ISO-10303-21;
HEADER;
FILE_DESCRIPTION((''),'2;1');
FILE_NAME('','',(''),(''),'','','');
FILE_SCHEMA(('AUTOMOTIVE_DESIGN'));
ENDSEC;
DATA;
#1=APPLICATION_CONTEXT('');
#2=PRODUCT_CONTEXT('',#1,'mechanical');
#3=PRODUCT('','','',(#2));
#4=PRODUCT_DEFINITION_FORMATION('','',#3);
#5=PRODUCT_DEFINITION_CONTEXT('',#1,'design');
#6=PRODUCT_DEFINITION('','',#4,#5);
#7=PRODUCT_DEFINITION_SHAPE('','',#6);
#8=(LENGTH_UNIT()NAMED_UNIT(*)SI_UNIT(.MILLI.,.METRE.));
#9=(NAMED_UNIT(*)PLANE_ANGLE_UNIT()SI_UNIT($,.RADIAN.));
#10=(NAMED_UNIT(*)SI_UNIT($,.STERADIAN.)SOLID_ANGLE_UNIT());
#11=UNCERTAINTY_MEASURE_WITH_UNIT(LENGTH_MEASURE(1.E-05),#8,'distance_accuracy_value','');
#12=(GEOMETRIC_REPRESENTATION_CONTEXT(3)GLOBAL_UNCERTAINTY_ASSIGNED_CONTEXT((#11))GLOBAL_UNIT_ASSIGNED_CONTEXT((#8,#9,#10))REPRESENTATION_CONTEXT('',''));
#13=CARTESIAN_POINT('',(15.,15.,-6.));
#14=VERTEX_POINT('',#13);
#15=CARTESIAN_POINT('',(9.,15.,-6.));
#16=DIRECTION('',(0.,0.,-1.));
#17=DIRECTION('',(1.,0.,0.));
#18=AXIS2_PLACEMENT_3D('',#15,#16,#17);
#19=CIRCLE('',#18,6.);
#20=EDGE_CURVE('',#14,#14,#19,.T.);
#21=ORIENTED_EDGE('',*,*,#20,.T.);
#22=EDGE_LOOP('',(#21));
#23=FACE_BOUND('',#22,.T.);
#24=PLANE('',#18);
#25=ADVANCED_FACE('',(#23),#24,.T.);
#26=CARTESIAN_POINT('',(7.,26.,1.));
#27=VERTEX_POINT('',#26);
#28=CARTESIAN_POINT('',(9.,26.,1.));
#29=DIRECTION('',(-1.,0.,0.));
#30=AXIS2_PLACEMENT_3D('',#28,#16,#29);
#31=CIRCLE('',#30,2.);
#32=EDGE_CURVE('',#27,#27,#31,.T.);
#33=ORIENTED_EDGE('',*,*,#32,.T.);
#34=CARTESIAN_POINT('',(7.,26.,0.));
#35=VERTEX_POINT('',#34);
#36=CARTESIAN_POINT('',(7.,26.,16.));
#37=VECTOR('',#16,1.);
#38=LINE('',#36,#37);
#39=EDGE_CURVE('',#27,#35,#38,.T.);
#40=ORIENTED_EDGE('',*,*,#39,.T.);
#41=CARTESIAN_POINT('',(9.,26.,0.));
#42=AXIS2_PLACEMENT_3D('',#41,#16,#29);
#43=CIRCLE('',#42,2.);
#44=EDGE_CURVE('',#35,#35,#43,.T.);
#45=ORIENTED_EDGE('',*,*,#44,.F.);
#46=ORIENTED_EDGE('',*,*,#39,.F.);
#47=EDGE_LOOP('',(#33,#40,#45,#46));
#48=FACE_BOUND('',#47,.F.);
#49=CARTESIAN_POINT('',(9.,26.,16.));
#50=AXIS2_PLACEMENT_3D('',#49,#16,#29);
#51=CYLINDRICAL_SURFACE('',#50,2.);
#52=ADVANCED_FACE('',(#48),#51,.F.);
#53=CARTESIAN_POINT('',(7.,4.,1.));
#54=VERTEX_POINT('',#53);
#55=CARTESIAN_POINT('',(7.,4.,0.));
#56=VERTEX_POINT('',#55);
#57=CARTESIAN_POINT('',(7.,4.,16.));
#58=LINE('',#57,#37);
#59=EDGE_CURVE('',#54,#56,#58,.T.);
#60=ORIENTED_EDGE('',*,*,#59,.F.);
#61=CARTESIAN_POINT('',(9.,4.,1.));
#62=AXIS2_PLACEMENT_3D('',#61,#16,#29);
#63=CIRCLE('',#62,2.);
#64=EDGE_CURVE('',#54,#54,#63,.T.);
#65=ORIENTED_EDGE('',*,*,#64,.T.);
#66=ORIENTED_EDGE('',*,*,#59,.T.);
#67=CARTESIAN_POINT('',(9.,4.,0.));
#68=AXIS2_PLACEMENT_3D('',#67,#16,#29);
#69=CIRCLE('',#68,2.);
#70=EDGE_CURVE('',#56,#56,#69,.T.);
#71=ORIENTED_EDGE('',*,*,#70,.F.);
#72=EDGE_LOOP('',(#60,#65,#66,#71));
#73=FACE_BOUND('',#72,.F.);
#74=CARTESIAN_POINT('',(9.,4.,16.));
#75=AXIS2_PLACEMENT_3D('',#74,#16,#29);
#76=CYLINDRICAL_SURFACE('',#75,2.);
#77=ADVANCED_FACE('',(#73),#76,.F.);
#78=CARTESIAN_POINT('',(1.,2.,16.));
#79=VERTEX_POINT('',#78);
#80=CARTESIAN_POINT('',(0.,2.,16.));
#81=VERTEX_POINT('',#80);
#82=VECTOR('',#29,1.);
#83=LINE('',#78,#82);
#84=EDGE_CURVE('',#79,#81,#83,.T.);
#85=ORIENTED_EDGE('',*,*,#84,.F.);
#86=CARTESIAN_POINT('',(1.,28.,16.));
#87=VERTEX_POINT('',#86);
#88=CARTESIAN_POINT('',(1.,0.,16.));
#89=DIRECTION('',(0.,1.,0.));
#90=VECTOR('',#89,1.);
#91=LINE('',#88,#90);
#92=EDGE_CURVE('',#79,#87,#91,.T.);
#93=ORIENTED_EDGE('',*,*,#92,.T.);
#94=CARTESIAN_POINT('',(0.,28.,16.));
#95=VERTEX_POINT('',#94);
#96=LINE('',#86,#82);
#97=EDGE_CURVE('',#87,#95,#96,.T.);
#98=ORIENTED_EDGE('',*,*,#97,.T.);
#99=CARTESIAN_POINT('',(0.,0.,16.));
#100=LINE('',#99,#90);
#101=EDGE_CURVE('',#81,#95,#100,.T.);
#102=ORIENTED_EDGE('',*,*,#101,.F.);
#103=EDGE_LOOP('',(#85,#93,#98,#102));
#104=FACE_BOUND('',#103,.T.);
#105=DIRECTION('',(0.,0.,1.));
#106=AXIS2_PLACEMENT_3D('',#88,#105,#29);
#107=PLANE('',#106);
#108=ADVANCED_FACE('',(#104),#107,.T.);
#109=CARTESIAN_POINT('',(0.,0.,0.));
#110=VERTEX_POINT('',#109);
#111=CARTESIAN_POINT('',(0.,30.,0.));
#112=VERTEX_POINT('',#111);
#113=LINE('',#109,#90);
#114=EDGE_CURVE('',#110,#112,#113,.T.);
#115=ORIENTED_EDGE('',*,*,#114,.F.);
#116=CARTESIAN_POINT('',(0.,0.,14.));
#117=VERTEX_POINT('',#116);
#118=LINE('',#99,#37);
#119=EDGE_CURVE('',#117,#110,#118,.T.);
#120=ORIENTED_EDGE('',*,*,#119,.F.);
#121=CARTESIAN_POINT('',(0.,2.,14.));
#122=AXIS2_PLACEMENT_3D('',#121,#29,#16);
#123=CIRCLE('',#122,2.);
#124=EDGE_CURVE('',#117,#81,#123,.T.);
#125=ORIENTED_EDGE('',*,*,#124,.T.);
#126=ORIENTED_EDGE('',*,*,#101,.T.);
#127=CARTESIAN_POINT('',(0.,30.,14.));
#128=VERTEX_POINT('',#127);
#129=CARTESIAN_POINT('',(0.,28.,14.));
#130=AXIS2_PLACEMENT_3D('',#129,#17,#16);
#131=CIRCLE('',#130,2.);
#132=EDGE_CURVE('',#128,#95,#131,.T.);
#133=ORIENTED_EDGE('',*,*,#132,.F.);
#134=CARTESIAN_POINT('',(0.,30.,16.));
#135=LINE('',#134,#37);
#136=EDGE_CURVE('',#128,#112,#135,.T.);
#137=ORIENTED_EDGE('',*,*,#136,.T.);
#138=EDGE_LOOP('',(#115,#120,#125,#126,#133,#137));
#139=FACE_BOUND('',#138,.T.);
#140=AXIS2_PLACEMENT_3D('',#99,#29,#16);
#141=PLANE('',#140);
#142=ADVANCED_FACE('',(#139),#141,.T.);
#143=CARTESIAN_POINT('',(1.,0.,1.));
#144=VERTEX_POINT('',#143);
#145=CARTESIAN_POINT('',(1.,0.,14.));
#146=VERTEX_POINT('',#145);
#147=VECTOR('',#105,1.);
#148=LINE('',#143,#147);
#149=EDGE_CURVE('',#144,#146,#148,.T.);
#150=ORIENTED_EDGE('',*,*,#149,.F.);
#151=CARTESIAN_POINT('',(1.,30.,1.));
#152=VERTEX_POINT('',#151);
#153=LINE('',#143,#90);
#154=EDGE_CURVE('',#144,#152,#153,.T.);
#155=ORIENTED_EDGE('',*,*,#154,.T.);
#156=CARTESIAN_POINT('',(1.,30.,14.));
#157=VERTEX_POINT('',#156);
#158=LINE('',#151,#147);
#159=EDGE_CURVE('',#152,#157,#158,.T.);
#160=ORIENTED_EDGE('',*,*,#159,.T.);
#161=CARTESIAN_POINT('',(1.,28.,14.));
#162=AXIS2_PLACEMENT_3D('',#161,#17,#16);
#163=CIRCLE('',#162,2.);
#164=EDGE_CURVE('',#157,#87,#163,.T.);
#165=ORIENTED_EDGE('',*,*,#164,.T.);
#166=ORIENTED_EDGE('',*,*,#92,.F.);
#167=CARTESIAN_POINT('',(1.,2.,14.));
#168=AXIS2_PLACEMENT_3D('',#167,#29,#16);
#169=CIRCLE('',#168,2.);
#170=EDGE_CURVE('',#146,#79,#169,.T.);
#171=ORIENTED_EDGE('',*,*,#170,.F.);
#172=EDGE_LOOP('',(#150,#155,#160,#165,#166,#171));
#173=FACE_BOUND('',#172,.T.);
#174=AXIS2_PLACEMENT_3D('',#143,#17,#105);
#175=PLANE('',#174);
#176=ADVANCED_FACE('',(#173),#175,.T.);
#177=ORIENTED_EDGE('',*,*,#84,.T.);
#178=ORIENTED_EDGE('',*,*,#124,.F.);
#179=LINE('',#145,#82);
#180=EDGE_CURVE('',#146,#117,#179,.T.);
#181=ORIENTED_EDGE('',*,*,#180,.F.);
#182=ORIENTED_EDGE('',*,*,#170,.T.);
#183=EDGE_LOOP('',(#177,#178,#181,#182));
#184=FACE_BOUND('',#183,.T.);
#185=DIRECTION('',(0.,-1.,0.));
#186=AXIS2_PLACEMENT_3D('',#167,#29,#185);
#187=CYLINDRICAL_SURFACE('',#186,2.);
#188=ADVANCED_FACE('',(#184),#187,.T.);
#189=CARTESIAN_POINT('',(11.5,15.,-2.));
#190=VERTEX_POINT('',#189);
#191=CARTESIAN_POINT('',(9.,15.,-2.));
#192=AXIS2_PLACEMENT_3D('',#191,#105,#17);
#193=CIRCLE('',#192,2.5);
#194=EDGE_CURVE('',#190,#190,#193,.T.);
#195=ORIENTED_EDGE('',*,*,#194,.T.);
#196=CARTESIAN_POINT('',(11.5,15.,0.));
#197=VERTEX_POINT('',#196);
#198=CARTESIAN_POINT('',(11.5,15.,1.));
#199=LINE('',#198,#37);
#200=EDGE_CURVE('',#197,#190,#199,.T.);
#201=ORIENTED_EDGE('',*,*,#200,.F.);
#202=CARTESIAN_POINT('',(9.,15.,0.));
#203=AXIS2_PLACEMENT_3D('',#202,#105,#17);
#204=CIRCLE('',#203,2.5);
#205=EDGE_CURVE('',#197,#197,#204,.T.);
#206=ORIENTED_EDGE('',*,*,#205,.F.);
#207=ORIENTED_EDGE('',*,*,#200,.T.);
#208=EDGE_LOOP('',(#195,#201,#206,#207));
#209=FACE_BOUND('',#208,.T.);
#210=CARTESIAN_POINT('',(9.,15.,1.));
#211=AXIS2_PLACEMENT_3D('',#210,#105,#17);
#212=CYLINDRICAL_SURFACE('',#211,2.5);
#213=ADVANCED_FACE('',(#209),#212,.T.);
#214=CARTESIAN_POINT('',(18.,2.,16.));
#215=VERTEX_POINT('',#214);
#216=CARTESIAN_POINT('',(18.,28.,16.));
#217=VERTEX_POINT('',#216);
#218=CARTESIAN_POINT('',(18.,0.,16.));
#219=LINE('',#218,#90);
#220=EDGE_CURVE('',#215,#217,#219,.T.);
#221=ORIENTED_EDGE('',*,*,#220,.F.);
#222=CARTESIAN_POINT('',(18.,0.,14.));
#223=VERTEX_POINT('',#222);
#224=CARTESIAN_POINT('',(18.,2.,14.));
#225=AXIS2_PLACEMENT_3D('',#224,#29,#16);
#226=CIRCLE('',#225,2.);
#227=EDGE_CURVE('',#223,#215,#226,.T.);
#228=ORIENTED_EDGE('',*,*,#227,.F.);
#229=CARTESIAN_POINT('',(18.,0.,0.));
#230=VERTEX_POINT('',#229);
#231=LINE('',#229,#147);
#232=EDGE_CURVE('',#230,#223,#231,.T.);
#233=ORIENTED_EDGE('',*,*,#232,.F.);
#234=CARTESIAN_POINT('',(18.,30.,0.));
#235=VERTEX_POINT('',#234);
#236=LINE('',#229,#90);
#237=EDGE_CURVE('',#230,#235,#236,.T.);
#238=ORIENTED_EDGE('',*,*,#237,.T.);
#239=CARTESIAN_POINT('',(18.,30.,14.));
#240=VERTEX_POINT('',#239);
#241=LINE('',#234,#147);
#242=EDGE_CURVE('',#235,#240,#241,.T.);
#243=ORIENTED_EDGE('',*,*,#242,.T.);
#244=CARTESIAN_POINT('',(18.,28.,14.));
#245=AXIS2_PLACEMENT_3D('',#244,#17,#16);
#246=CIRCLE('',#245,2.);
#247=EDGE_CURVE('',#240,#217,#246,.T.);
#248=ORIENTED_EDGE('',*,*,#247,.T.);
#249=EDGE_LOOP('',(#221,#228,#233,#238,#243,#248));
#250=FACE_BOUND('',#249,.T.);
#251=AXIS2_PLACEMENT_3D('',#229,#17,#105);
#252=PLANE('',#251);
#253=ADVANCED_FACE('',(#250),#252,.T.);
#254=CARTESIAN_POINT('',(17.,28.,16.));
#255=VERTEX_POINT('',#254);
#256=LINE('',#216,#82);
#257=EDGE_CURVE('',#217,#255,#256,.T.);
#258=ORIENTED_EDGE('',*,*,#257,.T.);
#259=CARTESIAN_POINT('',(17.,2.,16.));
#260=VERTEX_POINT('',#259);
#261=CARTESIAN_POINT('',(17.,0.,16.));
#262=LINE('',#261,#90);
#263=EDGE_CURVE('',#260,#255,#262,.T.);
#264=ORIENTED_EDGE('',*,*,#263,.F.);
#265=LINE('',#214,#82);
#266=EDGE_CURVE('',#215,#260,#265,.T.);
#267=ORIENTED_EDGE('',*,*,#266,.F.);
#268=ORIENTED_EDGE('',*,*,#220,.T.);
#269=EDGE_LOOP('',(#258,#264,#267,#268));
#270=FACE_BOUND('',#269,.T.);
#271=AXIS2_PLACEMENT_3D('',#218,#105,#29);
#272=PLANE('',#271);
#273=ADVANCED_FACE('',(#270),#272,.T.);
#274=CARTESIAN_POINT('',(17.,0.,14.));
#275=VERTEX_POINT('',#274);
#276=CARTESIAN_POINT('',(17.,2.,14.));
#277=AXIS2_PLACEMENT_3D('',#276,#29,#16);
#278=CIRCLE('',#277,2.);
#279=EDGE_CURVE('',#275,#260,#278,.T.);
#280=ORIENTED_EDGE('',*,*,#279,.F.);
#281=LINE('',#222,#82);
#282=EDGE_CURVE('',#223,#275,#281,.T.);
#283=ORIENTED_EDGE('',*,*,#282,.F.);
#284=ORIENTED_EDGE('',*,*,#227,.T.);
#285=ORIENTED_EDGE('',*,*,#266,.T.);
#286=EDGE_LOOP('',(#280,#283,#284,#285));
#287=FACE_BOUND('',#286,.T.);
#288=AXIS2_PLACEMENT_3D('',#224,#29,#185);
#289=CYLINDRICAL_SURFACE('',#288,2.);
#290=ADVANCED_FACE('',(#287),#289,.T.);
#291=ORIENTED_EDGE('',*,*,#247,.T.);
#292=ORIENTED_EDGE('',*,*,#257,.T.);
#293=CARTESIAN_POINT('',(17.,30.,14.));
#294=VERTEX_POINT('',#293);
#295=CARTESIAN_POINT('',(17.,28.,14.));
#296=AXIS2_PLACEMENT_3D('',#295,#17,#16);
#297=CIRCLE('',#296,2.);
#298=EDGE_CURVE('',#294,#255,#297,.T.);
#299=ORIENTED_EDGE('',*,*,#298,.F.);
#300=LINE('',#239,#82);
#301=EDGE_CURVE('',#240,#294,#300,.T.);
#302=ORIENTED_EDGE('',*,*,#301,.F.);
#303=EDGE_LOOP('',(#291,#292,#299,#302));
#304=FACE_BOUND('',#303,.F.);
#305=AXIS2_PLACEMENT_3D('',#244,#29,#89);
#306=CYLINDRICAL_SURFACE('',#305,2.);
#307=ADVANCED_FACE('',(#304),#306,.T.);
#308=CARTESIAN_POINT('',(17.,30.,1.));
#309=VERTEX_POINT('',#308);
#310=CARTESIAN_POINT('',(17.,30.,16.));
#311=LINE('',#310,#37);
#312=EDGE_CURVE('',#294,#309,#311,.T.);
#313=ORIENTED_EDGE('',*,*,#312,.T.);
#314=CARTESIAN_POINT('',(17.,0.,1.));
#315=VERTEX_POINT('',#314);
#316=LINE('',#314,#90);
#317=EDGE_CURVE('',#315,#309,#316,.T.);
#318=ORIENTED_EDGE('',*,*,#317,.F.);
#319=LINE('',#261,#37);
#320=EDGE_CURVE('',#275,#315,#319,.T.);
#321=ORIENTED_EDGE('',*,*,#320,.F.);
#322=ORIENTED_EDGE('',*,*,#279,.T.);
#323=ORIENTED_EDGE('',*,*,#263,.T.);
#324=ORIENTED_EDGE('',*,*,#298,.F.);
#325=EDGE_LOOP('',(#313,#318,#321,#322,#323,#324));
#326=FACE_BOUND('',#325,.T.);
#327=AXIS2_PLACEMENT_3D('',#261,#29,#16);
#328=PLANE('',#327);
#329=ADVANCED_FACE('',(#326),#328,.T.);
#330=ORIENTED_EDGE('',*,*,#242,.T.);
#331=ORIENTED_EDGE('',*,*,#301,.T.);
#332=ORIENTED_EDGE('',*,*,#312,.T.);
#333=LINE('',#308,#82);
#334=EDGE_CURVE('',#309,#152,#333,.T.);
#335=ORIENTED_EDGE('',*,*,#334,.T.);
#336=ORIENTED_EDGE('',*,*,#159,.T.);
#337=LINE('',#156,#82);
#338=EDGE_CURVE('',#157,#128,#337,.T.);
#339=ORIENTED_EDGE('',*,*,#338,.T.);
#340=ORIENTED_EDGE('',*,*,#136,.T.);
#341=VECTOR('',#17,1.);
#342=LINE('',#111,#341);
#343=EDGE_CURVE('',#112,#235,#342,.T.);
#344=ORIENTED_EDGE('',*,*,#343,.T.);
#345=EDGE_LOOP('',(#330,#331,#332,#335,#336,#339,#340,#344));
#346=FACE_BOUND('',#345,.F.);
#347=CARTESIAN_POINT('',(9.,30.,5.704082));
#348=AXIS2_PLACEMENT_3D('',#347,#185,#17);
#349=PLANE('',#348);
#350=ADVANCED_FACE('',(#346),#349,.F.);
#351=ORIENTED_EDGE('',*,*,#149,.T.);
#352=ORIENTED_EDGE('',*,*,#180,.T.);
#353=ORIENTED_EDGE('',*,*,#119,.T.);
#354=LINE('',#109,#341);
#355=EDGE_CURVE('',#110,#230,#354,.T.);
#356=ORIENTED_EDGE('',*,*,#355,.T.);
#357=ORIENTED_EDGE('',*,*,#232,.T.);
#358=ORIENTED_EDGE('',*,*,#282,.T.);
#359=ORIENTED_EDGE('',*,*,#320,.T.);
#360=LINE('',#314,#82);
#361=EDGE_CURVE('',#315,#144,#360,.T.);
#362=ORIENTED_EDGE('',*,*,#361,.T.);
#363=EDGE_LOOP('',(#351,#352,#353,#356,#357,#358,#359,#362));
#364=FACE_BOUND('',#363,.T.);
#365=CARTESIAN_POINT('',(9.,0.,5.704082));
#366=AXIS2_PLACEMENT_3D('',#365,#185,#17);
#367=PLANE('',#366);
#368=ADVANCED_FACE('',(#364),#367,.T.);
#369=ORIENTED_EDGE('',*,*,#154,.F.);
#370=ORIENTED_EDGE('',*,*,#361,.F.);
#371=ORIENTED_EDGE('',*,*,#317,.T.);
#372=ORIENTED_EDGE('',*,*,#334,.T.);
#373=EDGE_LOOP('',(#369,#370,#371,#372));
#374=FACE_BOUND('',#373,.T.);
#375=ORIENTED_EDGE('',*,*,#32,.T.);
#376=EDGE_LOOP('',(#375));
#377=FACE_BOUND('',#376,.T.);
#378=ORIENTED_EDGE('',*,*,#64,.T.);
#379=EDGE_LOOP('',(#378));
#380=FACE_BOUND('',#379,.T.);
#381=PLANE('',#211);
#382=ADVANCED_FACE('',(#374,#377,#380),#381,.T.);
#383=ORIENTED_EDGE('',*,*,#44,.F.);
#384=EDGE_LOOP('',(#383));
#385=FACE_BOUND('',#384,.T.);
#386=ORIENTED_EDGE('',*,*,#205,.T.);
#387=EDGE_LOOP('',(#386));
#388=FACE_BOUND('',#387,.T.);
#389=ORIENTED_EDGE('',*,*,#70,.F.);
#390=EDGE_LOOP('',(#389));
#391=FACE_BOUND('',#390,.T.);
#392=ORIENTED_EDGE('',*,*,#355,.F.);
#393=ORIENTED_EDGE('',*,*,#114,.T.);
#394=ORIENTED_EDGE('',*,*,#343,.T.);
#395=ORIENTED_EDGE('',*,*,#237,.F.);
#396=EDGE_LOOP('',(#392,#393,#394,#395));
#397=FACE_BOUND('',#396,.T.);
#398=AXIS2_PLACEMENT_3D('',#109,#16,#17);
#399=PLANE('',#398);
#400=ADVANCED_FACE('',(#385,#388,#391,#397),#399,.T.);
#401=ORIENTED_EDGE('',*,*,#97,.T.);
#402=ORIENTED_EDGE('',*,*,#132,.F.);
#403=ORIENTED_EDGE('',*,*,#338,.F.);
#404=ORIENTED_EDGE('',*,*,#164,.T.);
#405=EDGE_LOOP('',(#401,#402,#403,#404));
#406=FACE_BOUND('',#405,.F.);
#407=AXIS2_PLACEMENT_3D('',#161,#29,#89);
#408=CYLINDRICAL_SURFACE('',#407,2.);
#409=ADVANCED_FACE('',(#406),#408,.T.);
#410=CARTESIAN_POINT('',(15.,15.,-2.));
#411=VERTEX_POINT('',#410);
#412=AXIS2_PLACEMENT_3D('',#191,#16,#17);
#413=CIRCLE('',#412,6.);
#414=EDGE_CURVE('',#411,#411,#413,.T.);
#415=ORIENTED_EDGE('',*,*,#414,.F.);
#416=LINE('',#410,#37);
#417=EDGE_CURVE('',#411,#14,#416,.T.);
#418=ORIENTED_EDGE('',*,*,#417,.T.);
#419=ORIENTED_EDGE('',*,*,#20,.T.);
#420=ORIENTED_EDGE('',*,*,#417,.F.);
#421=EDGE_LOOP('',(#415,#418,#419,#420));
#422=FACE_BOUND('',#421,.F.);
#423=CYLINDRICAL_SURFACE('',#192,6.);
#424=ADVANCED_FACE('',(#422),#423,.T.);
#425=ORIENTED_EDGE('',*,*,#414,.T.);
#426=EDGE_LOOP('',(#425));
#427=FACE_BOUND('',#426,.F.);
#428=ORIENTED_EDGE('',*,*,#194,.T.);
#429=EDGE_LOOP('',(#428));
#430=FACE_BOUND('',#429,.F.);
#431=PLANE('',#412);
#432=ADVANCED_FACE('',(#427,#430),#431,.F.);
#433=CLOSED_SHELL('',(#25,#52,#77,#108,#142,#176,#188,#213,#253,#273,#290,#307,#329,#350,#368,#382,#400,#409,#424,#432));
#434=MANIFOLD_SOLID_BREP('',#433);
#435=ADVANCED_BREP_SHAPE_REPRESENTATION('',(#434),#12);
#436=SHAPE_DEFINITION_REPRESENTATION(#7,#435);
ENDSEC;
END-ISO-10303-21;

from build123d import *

# Parameters (mm, degrees)
F1_DEPTH = 30
F2_R     = 2.5
F3_DEPTH = 3
F4_R     = 6
F4_R_2   = 2.5
F5_DEPTH = 4
F6_R     = 2
F7_D     = 4
F7_DEPTH = 15
F7_TIP   = 1.2017212381


with BuildPart() as f1:
    # F0 (on Front) → F1 (new body)
    with BuildSketch(Plane.XZ):
        Polygon((0, 1), (0, 0), (18, 0), (18, 1), (18, 16), (17, 16), (17, 1), (1, 1), (1, 16), (0, 16), align=None)
    extrude(amount=-F1_DEPTH)

    # F2 (on face) → F3 (join)
    with BuildSketch(Plane.XY.offset(1)):
        with Locations((9, 15)):
            Circle(F2_R)
    extrude(amount=-F3_DEPTH)

    # F4 (on face) → F5 (join)
    with BuildSketch(Plane(origin=(0, 0, -2), x_dir=(1, 0, 0), z_dir=(0, 0, -1))):
        with Locations((9, -15)):
            Circle(F4_R)
        with Locations((9, -15)):
            Circle(F4_R_2, mode=Mode.SUBTRACT)
        with Locations((9, -15)):
            Circle(F4_R_2)
    extrude(amount=F5_DEPTH)

    # F6
    f6_edges = [f1.edges().sort_by_distance(p)[0] for p in [
        (17.5, 0, 16),
        (17.5, 30, 16),
        (0.5, 30, 16),
        (0.5, 0, 16),
    ]]
    fillet(f6_edges, radius=F6_R)

    # F7
    with Locations(Plane.XY.offset(1)):
        with Locations((9, 4), (9, 26)):
            Hole(F7_D / 2, depth=F7_DEPTH)
            with Locations((0, 0, -(F7_DEPTH + F7_TIP / 2))):  # 118° drill point
                Cone(0, F7_D / 2, F7_TIP, mode=Mode.SUBTRACT)


solid = f1.part
